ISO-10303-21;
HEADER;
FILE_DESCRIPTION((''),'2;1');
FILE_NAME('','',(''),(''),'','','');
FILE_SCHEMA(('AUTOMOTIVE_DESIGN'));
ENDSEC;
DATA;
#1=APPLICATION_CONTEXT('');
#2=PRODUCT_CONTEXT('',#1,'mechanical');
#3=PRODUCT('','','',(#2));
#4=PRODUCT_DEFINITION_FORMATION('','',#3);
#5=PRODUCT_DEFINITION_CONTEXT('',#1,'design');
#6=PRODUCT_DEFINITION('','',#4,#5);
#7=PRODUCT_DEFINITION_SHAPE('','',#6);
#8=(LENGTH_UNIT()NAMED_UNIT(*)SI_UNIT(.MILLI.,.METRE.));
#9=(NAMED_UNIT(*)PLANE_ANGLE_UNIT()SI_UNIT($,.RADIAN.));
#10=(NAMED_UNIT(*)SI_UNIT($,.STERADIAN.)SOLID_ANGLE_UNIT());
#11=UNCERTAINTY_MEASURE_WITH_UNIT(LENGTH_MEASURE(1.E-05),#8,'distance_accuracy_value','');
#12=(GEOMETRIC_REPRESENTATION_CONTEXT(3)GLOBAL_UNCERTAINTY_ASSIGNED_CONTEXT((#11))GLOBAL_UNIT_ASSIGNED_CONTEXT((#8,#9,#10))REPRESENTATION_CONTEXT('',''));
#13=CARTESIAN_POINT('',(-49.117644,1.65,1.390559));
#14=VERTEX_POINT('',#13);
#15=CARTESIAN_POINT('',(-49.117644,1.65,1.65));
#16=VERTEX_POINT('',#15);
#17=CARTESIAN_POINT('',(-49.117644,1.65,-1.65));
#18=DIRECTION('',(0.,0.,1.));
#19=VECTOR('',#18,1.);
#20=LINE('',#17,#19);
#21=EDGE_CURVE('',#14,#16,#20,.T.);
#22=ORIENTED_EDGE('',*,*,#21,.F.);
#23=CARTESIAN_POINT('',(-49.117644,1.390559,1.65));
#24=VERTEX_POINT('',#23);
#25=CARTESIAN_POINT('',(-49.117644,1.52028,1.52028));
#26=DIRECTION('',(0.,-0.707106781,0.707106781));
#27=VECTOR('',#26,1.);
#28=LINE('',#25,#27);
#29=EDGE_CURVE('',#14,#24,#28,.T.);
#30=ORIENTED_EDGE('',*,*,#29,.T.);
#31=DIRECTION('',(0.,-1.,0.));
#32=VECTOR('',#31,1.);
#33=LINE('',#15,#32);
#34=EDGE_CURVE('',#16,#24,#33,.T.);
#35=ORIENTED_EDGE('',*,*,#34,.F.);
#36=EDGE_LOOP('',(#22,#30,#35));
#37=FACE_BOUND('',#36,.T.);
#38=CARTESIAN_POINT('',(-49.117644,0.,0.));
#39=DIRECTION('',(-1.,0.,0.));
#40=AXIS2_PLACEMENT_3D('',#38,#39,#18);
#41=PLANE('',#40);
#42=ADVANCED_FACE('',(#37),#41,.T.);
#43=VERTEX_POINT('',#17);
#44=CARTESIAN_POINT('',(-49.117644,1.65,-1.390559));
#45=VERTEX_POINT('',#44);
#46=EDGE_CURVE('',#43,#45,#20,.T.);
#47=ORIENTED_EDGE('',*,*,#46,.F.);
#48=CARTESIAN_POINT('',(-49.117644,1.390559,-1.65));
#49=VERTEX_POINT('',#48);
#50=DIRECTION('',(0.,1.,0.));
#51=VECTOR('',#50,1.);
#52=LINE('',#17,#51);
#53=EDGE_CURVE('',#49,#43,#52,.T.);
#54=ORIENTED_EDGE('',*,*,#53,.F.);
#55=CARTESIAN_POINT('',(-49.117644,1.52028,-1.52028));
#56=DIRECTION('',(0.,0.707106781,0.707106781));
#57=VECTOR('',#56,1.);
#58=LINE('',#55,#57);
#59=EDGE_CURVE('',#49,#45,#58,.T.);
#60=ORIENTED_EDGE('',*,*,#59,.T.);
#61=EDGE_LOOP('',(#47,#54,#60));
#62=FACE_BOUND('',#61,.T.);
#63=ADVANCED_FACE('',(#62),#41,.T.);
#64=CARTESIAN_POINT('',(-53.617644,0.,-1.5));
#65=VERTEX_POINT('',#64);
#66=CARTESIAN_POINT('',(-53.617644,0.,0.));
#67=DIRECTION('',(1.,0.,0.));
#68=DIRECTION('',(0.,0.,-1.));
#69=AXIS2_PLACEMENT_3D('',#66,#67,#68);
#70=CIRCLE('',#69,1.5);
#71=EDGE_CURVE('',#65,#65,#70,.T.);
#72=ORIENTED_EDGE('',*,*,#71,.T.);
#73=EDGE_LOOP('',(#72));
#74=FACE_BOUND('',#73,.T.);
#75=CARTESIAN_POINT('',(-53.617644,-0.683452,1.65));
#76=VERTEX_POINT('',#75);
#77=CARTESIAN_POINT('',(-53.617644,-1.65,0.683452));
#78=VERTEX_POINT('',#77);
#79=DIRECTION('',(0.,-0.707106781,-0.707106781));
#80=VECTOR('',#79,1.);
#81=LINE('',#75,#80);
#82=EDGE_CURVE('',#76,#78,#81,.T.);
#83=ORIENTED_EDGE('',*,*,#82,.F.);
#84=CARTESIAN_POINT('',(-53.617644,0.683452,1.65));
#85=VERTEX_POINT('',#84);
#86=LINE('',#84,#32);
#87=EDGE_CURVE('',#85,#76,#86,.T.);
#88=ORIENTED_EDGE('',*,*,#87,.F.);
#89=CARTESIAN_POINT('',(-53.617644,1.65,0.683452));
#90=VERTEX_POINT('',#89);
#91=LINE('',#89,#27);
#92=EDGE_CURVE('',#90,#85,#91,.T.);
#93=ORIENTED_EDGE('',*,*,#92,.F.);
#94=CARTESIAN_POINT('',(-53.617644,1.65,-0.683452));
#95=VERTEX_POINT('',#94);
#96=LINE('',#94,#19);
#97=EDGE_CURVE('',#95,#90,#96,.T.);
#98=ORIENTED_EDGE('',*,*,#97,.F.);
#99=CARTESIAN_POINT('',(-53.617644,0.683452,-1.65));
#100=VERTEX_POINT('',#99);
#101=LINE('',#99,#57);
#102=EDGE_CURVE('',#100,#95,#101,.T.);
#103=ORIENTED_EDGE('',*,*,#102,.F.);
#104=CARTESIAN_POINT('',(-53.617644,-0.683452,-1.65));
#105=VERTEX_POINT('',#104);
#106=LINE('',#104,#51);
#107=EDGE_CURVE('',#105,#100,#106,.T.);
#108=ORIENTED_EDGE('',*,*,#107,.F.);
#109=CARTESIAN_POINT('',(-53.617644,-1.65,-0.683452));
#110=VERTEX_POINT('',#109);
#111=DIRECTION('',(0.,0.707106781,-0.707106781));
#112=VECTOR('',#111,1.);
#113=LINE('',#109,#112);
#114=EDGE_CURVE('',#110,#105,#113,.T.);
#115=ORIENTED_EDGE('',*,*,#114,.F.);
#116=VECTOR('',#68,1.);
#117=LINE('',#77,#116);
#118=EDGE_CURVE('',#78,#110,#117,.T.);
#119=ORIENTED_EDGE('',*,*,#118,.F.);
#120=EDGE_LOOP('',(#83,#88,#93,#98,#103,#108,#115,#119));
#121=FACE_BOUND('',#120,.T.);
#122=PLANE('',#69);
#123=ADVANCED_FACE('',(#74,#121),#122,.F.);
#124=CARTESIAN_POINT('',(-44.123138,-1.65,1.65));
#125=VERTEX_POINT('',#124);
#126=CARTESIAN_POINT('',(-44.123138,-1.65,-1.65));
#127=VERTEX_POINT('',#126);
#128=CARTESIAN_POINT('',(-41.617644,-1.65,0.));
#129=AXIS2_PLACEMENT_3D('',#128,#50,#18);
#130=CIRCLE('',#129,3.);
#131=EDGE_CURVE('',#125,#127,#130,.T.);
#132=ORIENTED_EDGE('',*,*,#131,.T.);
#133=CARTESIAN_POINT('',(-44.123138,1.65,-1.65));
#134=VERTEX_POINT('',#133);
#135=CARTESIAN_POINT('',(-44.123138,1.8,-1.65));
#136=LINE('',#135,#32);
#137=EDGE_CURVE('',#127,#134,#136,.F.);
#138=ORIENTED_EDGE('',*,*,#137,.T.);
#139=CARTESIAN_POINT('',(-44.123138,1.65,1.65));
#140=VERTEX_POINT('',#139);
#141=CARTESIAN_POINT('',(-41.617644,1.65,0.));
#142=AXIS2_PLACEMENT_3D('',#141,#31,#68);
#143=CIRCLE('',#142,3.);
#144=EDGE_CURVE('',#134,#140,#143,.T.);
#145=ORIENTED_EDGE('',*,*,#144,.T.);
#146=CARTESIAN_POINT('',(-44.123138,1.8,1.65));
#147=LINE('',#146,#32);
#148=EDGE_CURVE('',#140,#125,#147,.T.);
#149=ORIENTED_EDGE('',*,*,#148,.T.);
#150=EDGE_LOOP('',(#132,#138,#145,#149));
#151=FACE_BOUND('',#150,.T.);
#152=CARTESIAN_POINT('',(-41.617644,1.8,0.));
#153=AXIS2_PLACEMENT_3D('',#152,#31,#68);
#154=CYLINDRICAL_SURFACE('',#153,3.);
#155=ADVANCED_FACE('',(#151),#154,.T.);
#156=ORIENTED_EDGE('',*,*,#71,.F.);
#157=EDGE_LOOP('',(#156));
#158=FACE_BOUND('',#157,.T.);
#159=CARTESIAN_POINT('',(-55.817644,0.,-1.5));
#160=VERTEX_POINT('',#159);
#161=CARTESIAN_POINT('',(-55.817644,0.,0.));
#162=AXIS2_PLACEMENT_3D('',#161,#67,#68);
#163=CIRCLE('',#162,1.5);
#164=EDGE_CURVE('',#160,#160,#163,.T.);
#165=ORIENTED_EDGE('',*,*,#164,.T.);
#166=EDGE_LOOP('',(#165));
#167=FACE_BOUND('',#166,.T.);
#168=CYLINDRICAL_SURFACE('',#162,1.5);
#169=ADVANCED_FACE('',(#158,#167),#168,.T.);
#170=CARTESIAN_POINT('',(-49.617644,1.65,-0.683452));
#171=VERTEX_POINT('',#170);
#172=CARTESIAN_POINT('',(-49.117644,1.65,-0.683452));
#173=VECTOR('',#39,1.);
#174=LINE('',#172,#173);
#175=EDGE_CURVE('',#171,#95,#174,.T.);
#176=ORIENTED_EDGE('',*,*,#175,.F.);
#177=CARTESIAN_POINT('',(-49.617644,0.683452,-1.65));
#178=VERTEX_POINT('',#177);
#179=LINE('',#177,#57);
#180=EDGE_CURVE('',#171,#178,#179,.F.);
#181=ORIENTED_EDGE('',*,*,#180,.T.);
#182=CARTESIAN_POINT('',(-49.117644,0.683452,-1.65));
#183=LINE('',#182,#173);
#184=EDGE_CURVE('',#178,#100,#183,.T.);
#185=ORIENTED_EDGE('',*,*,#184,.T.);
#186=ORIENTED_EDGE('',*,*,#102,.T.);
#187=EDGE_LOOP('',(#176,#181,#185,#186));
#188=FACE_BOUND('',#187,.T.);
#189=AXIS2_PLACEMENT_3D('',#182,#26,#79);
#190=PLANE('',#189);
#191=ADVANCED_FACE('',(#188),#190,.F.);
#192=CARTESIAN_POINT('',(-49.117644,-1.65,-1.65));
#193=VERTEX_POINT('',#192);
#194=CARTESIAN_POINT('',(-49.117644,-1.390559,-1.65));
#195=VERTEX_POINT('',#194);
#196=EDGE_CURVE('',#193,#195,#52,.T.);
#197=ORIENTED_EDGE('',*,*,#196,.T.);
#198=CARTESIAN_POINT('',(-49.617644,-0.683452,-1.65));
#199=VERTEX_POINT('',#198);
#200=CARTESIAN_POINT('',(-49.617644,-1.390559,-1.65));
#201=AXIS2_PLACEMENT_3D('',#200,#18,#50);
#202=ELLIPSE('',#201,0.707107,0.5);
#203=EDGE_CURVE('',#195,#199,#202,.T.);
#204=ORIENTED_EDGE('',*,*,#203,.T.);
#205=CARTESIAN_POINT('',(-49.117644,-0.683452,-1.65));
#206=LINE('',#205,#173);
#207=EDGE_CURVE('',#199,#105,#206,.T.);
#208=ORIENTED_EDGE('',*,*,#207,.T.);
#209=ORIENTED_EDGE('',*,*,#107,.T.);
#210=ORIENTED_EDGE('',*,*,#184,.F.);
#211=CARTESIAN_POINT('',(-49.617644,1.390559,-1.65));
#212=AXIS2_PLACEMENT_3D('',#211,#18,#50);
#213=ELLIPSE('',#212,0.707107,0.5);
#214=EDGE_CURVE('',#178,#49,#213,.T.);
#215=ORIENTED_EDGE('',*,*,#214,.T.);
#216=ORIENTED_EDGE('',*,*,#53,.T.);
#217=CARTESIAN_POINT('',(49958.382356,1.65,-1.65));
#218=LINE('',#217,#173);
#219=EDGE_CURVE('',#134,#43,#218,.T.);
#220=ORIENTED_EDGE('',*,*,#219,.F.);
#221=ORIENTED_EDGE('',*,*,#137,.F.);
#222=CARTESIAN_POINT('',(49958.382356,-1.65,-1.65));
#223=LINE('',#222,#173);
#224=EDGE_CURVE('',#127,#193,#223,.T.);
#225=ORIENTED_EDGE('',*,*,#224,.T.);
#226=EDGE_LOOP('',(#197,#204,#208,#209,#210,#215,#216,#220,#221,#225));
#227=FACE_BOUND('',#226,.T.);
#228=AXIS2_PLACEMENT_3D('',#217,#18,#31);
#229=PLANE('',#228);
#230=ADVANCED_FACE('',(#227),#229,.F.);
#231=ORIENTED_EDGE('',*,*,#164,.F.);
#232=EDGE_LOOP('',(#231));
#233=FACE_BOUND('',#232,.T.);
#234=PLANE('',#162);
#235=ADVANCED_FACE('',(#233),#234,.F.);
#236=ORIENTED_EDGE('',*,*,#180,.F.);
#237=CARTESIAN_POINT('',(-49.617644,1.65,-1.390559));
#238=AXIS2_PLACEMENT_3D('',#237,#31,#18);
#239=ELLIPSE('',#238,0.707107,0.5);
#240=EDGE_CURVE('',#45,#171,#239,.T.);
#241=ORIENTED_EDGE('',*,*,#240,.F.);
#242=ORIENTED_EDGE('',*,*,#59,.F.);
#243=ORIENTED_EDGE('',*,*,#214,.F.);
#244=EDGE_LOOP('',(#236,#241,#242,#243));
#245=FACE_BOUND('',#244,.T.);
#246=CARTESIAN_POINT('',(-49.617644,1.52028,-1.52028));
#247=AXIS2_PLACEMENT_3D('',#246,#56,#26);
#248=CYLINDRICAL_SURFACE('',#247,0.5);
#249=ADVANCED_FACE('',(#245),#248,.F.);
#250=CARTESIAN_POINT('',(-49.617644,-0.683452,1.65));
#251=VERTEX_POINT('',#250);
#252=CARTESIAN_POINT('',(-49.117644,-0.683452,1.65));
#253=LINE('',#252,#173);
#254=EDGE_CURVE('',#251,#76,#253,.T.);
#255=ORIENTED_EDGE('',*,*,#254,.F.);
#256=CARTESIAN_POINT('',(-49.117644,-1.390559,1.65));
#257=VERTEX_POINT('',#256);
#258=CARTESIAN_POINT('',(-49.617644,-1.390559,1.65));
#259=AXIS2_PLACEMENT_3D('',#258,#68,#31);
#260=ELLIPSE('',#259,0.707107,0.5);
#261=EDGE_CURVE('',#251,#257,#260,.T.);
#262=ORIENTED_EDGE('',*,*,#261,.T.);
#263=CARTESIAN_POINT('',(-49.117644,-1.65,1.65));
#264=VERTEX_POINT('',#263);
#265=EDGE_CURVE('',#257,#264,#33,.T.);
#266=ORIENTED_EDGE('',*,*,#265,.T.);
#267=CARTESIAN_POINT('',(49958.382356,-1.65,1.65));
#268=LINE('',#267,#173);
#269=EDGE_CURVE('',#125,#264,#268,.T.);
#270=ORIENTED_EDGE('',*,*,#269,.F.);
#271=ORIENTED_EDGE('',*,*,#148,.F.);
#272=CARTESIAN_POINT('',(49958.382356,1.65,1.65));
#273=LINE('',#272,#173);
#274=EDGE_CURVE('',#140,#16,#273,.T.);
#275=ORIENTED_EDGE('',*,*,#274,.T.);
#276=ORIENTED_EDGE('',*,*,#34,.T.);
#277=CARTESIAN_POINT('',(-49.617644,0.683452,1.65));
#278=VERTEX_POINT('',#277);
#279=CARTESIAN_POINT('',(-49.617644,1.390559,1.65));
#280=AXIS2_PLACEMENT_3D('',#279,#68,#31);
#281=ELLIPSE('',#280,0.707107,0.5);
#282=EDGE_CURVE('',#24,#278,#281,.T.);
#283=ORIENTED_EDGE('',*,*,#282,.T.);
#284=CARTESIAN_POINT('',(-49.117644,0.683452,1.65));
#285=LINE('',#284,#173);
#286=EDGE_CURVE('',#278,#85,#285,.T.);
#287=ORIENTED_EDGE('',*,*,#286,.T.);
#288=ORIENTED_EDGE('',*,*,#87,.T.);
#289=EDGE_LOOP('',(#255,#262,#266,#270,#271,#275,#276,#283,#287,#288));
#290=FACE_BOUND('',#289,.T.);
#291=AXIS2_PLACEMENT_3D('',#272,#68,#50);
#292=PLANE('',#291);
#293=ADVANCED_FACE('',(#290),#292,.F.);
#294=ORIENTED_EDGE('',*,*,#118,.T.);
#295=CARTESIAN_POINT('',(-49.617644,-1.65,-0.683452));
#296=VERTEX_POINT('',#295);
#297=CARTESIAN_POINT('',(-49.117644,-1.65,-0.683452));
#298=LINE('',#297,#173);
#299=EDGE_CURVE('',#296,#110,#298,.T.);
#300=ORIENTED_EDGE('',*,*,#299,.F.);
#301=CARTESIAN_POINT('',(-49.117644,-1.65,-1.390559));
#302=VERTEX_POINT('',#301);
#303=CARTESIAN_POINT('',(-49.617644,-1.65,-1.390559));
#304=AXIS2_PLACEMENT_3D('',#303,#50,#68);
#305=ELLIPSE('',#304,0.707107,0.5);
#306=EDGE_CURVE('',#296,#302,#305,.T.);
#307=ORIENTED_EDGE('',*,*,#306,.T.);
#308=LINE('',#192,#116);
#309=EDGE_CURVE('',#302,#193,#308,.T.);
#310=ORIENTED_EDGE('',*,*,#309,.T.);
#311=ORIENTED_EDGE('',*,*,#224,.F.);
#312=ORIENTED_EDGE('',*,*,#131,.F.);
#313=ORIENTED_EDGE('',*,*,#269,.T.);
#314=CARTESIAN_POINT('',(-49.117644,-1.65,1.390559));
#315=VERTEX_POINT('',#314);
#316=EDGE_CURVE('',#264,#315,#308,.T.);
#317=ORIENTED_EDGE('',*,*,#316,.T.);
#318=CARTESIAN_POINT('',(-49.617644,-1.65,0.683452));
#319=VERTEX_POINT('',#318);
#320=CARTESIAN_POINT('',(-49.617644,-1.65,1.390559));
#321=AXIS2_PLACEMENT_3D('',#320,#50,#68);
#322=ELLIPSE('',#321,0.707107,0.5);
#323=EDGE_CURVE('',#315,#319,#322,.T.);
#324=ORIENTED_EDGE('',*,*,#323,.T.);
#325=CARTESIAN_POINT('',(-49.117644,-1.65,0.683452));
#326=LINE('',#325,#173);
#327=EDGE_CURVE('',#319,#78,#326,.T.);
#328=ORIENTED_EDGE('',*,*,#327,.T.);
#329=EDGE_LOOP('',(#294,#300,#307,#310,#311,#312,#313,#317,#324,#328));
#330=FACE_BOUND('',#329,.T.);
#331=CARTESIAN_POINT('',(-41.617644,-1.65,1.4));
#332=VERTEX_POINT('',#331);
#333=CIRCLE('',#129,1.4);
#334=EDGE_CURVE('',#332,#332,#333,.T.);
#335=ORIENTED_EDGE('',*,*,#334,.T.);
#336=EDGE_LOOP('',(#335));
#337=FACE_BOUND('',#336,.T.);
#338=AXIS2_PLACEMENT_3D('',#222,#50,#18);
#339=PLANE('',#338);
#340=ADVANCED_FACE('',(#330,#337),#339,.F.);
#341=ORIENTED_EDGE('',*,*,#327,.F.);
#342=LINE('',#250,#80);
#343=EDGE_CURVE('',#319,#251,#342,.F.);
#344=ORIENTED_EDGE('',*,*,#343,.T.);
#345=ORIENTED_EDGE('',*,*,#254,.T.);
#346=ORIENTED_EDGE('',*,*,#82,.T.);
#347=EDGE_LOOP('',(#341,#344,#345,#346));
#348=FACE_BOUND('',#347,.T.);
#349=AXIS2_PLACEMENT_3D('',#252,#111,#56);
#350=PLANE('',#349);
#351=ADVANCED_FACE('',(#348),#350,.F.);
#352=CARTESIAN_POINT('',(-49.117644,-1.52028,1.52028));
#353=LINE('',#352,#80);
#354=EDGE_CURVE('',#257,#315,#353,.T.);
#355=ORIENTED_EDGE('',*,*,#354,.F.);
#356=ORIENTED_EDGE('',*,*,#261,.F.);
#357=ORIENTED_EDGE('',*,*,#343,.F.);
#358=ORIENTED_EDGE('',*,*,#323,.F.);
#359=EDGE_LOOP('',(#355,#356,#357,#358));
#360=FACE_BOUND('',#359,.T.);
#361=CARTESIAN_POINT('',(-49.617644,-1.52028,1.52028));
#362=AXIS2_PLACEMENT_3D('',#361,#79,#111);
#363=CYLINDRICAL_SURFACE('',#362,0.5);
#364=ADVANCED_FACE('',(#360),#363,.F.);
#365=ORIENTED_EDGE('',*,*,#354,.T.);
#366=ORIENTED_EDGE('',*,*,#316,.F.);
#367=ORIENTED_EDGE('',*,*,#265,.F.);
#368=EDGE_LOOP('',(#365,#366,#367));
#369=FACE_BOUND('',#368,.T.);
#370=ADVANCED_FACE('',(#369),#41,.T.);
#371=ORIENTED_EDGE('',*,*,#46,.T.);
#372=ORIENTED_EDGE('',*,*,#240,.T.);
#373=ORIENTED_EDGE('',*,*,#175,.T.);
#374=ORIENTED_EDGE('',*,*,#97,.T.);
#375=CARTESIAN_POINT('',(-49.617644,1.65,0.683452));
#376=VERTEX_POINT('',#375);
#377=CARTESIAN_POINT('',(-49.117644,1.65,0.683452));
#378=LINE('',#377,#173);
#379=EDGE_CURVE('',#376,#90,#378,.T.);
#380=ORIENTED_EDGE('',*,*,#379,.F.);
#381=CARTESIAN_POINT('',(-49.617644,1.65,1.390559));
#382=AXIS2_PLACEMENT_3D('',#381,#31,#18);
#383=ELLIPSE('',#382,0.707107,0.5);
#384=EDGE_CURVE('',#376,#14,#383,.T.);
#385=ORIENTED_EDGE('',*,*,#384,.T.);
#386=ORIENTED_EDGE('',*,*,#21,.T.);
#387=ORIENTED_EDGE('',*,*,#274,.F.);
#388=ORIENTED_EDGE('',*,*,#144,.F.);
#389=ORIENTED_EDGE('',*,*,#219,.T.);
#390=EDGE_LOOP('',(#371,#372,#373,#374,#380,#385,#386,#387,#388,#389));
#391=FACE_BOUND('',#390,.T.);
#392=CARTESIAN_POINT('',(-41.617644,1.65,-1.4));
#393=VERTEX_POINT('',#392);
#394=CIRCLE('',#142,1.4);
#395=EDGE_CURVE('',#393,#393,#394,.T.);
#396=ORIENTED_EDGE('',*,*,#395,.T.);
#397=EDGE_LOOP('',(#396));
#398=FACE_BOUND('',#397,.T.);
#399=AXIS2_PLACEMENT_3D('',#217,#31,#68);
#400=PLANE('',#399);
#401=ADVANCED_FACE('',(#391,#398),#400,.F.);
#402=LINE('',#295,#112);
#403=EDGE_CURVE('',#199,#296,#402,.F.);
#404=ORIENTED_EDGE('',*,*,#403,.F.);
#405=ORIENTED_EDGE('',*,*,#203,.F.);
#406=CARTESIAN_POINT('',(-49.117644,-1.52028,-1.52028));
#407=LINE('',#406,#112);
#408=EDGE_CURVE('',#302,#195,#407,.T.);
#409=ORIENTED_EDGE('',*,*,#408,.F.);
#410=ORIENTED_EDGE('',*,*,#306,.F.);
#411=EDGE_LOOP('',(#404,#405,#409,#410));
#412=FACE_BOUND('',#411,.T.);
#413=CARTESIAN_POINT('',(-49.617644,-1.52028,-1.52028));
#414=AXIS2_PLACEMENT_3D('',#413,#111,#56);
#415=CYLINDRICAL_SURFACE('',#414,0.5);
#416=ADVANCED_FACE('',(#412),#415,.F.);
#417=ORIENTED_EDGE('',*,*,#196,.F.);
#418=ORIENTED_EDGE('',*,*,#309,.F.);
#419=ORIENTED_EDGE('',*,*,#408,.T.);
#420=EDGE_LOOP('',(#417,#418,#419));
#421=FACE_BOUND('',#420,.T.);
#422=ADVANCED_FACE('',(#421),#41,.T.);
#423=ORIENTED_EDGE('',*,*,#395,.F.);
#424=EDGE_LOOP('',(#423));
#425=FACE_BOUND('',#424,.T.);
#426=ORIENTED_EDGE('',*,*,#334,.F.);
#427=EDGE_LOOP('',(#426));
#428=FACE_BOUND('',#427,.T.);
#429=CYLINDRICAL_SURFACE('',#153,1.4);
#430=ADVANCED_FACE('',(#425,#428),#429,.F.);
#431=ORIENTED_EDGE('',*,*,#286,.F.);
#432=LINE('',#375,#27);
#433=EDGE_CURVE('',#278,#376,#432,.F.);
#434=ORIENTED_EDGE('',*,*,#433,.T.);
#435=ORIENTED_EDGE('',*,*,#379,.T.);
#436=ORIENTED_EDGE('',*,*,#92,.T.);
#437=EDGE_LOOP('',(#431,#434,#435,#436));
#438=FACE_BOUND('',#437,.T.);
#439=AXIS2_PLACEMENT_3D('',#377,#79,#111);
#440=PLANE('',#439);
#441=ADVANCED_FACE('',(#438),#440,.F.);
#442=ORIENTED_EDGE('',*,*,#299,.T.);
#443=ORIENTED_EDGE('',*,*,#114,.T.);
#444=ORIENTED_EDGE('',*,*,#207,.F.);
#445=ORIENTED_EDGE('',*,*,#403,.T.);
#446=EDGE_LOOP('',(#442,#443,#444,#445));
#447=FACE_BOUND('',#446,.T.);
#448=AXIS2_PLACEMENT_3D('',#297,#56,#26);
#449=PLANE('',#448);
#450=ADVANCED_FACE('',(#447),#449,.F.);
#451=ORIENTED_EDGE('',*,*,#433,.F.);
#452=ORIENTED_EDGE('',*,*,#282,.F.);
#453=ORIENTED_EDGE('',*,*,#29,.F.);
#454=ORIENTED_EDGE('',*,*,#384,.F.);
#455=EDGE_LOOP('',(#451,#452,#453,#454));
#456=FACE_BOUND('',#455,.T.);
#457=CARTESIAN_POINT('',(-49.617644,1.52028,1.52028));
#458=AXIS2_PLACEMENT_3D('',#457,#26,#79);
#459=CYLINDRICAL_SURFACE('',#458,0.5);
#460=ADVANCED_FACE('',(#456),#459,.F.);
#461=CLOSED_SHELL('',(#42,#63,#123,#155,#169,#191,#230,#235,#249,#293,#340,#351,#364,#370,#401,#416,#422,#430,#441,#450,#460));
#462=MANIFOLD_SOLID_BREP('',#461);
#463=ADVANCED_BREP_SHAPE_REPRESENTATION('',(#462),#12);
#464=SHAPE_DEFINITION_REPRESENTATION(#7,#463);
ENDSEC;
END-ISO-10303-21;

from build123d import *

# Parameters (mm, degrees)
SKETCH1_R                = 30
SKETCH1_R_2              = 14
BOSS_EXTRUDE1_DEPTH      = 18
BOSS_EXTRUDE2_DEPTH      = 45
SKETCH3_R                = 15
BOSS_EXTRUDE3_DEPTH      = 22
BOSS_EXTRUDE4_REACH      = 112.675
SKETCH4_W                = 33
SKETCH4_H                = 33
FILLET1_R                = 5
FILLET7_R                = 1.5
SCALA2_SCALE             = 0.1
SCHIZZO1_W               = 13.938376935
SCHIZZO1_H               = 12.715061938
TAGLIO_ESTRUSIONE1_DEPTH = 0.15
SCHIZZO2_W               = 8.711485585
SCHIZZO2_H               = 10.583528232
TAGLIO_ESTRUSIONE2_DEPTH = 0.15


with BuildPart() as part:
    # Sketch1 → Boss-Extrude1 (new, symmetric)
    with BuildSketch(Plane(origin=(0, 0, 0), x_dir=(1, 0, 0), z_dir=(0, 1, 0))):
        with Locations(Location((0, 0, 0), (0, 0, 270))):
            Circle(SKETCH1_R)
        with Locations(Location((0, 0, 0), (0, 0, 270))):
            Circle(SKETCH1_R_2, mode=Mode.SUBTRACT)
    extrude(amount=BOSS_EXTRUDE1_DEPTH, both=True)

    # Sketch4 → Boss-Extrude4 (add, up to next)
    with BuildSketch(Plane(origin=(-75, 0, 0), x_dir=(0, 0, -1), z_dir=(1, 0, 0)), mode=Mode.PRIVATE) as boss_extrude4_sk1:
        Rectangle(SKETCH4_W, SKETCH4_H)
    boss_extrude4_tool1 = extrude(boss_extrude4_sk1.sketch, amount=BOSS_EXTRUDE4_REACH, mode=Mode.PRIVATE) - part.part


with BuildPart() as body_2:
    # Sketch2 → Boss-Extrude2 (new body)
    with BuildSketch(Plane(origin=(-120, 0, 0), x_dir=(0, 0, -1), z_dir=(1, 0, 0))):
        Polygon((-16.5, 6.834523779), (-16.5, -6.834523779), (-6.834523779, -16.5), (6.834523779, -16.5), (16.5, -6.834523779), (16.5, 6.834523779), (6.834523779, 16.5), (-6.834523779, 16.5), align=None)
    extrude(amount=BOSS_EXTRUDE2_DEPTH)

    # Sketch3 → Boss-Extrude3 (add)
    with BuildSketch(Plane(origin=(-120, 0, 0), x_dir=(0, 0, -1), z_dir=(1, 0, 0))):
        Circle(SKETCH3_R)
    extrude(amount=-BOSS_EXTRUDE3_DEPTH)


with BuildPart() as part_1:
    add(part.part)

    add(body_2.part)  # Boss-Extrude4 merges body 2
    add(boss_extrude4_tool1.solids().sort_by_distance((-75, 0, 0))[0])

    # Fillet1
    fillet1_edges = [part_1.edges().sort_by_distance(p)[0] for p in [
        (-75, 11.66726189, 11.66726189),
        (-75, -11.66726189, 11.66726189),
        (-75, -11.66726189, -11.66726189),
        (-75, 11.66726189, -11.66726189),
    ]]
    fillet(fillet1_edges, radius=FILLET1_R)

    # Fillet7
    fillet7_edges = [part_1.edges().sort_by_distance(p)[0] for p in [
        (-30, -16.5, 0),
        (-30, 16.5, 0),
    ]]
    fillet(fillet7_edges, radius=FILLET7_R - 0.0001)  # a hair under: the kernel refuses the full size


with BuildPart() as part_2:
    # Scala2: scaled about (-46.241792436, -2e-09, 0)
    add(part_1.part.scale(SCALA2_SCALE).moved(Location((-41.617613192, -2e-09, 0))))

    # Schizzo1 → Taglio-Estrusione1 (cut)
    with BuildSketch(Plane(origin=(0, 1.8, 0), x_dir=(1, 0, 0), z_dir=(0, 1, 0))):
        with Locations((-40.78597266, -0.750670566)):
            Rectangle(SCHIZZO1_W, SCHIZZO1_H)
    extrude(amount=-TAGLIO_ESTRUSIONE1_DEPTH, mode=Mode.SUBTRACT)

    # Schizzo2 → Taglio-Estrusione2 (cut)
    with BuildSketch(Plane.XZ.offset(1.8)):
        with Locations((-41.379095083, -0.12974553)):
            Rectangle(SCHIZZO2_W, SCHIZZO2_H)
    extrude(amount=-TAGLIO_ESTRUSIONE2_DEPTH, mode=Mode.SUBTRACT)


solid = part_2.part
